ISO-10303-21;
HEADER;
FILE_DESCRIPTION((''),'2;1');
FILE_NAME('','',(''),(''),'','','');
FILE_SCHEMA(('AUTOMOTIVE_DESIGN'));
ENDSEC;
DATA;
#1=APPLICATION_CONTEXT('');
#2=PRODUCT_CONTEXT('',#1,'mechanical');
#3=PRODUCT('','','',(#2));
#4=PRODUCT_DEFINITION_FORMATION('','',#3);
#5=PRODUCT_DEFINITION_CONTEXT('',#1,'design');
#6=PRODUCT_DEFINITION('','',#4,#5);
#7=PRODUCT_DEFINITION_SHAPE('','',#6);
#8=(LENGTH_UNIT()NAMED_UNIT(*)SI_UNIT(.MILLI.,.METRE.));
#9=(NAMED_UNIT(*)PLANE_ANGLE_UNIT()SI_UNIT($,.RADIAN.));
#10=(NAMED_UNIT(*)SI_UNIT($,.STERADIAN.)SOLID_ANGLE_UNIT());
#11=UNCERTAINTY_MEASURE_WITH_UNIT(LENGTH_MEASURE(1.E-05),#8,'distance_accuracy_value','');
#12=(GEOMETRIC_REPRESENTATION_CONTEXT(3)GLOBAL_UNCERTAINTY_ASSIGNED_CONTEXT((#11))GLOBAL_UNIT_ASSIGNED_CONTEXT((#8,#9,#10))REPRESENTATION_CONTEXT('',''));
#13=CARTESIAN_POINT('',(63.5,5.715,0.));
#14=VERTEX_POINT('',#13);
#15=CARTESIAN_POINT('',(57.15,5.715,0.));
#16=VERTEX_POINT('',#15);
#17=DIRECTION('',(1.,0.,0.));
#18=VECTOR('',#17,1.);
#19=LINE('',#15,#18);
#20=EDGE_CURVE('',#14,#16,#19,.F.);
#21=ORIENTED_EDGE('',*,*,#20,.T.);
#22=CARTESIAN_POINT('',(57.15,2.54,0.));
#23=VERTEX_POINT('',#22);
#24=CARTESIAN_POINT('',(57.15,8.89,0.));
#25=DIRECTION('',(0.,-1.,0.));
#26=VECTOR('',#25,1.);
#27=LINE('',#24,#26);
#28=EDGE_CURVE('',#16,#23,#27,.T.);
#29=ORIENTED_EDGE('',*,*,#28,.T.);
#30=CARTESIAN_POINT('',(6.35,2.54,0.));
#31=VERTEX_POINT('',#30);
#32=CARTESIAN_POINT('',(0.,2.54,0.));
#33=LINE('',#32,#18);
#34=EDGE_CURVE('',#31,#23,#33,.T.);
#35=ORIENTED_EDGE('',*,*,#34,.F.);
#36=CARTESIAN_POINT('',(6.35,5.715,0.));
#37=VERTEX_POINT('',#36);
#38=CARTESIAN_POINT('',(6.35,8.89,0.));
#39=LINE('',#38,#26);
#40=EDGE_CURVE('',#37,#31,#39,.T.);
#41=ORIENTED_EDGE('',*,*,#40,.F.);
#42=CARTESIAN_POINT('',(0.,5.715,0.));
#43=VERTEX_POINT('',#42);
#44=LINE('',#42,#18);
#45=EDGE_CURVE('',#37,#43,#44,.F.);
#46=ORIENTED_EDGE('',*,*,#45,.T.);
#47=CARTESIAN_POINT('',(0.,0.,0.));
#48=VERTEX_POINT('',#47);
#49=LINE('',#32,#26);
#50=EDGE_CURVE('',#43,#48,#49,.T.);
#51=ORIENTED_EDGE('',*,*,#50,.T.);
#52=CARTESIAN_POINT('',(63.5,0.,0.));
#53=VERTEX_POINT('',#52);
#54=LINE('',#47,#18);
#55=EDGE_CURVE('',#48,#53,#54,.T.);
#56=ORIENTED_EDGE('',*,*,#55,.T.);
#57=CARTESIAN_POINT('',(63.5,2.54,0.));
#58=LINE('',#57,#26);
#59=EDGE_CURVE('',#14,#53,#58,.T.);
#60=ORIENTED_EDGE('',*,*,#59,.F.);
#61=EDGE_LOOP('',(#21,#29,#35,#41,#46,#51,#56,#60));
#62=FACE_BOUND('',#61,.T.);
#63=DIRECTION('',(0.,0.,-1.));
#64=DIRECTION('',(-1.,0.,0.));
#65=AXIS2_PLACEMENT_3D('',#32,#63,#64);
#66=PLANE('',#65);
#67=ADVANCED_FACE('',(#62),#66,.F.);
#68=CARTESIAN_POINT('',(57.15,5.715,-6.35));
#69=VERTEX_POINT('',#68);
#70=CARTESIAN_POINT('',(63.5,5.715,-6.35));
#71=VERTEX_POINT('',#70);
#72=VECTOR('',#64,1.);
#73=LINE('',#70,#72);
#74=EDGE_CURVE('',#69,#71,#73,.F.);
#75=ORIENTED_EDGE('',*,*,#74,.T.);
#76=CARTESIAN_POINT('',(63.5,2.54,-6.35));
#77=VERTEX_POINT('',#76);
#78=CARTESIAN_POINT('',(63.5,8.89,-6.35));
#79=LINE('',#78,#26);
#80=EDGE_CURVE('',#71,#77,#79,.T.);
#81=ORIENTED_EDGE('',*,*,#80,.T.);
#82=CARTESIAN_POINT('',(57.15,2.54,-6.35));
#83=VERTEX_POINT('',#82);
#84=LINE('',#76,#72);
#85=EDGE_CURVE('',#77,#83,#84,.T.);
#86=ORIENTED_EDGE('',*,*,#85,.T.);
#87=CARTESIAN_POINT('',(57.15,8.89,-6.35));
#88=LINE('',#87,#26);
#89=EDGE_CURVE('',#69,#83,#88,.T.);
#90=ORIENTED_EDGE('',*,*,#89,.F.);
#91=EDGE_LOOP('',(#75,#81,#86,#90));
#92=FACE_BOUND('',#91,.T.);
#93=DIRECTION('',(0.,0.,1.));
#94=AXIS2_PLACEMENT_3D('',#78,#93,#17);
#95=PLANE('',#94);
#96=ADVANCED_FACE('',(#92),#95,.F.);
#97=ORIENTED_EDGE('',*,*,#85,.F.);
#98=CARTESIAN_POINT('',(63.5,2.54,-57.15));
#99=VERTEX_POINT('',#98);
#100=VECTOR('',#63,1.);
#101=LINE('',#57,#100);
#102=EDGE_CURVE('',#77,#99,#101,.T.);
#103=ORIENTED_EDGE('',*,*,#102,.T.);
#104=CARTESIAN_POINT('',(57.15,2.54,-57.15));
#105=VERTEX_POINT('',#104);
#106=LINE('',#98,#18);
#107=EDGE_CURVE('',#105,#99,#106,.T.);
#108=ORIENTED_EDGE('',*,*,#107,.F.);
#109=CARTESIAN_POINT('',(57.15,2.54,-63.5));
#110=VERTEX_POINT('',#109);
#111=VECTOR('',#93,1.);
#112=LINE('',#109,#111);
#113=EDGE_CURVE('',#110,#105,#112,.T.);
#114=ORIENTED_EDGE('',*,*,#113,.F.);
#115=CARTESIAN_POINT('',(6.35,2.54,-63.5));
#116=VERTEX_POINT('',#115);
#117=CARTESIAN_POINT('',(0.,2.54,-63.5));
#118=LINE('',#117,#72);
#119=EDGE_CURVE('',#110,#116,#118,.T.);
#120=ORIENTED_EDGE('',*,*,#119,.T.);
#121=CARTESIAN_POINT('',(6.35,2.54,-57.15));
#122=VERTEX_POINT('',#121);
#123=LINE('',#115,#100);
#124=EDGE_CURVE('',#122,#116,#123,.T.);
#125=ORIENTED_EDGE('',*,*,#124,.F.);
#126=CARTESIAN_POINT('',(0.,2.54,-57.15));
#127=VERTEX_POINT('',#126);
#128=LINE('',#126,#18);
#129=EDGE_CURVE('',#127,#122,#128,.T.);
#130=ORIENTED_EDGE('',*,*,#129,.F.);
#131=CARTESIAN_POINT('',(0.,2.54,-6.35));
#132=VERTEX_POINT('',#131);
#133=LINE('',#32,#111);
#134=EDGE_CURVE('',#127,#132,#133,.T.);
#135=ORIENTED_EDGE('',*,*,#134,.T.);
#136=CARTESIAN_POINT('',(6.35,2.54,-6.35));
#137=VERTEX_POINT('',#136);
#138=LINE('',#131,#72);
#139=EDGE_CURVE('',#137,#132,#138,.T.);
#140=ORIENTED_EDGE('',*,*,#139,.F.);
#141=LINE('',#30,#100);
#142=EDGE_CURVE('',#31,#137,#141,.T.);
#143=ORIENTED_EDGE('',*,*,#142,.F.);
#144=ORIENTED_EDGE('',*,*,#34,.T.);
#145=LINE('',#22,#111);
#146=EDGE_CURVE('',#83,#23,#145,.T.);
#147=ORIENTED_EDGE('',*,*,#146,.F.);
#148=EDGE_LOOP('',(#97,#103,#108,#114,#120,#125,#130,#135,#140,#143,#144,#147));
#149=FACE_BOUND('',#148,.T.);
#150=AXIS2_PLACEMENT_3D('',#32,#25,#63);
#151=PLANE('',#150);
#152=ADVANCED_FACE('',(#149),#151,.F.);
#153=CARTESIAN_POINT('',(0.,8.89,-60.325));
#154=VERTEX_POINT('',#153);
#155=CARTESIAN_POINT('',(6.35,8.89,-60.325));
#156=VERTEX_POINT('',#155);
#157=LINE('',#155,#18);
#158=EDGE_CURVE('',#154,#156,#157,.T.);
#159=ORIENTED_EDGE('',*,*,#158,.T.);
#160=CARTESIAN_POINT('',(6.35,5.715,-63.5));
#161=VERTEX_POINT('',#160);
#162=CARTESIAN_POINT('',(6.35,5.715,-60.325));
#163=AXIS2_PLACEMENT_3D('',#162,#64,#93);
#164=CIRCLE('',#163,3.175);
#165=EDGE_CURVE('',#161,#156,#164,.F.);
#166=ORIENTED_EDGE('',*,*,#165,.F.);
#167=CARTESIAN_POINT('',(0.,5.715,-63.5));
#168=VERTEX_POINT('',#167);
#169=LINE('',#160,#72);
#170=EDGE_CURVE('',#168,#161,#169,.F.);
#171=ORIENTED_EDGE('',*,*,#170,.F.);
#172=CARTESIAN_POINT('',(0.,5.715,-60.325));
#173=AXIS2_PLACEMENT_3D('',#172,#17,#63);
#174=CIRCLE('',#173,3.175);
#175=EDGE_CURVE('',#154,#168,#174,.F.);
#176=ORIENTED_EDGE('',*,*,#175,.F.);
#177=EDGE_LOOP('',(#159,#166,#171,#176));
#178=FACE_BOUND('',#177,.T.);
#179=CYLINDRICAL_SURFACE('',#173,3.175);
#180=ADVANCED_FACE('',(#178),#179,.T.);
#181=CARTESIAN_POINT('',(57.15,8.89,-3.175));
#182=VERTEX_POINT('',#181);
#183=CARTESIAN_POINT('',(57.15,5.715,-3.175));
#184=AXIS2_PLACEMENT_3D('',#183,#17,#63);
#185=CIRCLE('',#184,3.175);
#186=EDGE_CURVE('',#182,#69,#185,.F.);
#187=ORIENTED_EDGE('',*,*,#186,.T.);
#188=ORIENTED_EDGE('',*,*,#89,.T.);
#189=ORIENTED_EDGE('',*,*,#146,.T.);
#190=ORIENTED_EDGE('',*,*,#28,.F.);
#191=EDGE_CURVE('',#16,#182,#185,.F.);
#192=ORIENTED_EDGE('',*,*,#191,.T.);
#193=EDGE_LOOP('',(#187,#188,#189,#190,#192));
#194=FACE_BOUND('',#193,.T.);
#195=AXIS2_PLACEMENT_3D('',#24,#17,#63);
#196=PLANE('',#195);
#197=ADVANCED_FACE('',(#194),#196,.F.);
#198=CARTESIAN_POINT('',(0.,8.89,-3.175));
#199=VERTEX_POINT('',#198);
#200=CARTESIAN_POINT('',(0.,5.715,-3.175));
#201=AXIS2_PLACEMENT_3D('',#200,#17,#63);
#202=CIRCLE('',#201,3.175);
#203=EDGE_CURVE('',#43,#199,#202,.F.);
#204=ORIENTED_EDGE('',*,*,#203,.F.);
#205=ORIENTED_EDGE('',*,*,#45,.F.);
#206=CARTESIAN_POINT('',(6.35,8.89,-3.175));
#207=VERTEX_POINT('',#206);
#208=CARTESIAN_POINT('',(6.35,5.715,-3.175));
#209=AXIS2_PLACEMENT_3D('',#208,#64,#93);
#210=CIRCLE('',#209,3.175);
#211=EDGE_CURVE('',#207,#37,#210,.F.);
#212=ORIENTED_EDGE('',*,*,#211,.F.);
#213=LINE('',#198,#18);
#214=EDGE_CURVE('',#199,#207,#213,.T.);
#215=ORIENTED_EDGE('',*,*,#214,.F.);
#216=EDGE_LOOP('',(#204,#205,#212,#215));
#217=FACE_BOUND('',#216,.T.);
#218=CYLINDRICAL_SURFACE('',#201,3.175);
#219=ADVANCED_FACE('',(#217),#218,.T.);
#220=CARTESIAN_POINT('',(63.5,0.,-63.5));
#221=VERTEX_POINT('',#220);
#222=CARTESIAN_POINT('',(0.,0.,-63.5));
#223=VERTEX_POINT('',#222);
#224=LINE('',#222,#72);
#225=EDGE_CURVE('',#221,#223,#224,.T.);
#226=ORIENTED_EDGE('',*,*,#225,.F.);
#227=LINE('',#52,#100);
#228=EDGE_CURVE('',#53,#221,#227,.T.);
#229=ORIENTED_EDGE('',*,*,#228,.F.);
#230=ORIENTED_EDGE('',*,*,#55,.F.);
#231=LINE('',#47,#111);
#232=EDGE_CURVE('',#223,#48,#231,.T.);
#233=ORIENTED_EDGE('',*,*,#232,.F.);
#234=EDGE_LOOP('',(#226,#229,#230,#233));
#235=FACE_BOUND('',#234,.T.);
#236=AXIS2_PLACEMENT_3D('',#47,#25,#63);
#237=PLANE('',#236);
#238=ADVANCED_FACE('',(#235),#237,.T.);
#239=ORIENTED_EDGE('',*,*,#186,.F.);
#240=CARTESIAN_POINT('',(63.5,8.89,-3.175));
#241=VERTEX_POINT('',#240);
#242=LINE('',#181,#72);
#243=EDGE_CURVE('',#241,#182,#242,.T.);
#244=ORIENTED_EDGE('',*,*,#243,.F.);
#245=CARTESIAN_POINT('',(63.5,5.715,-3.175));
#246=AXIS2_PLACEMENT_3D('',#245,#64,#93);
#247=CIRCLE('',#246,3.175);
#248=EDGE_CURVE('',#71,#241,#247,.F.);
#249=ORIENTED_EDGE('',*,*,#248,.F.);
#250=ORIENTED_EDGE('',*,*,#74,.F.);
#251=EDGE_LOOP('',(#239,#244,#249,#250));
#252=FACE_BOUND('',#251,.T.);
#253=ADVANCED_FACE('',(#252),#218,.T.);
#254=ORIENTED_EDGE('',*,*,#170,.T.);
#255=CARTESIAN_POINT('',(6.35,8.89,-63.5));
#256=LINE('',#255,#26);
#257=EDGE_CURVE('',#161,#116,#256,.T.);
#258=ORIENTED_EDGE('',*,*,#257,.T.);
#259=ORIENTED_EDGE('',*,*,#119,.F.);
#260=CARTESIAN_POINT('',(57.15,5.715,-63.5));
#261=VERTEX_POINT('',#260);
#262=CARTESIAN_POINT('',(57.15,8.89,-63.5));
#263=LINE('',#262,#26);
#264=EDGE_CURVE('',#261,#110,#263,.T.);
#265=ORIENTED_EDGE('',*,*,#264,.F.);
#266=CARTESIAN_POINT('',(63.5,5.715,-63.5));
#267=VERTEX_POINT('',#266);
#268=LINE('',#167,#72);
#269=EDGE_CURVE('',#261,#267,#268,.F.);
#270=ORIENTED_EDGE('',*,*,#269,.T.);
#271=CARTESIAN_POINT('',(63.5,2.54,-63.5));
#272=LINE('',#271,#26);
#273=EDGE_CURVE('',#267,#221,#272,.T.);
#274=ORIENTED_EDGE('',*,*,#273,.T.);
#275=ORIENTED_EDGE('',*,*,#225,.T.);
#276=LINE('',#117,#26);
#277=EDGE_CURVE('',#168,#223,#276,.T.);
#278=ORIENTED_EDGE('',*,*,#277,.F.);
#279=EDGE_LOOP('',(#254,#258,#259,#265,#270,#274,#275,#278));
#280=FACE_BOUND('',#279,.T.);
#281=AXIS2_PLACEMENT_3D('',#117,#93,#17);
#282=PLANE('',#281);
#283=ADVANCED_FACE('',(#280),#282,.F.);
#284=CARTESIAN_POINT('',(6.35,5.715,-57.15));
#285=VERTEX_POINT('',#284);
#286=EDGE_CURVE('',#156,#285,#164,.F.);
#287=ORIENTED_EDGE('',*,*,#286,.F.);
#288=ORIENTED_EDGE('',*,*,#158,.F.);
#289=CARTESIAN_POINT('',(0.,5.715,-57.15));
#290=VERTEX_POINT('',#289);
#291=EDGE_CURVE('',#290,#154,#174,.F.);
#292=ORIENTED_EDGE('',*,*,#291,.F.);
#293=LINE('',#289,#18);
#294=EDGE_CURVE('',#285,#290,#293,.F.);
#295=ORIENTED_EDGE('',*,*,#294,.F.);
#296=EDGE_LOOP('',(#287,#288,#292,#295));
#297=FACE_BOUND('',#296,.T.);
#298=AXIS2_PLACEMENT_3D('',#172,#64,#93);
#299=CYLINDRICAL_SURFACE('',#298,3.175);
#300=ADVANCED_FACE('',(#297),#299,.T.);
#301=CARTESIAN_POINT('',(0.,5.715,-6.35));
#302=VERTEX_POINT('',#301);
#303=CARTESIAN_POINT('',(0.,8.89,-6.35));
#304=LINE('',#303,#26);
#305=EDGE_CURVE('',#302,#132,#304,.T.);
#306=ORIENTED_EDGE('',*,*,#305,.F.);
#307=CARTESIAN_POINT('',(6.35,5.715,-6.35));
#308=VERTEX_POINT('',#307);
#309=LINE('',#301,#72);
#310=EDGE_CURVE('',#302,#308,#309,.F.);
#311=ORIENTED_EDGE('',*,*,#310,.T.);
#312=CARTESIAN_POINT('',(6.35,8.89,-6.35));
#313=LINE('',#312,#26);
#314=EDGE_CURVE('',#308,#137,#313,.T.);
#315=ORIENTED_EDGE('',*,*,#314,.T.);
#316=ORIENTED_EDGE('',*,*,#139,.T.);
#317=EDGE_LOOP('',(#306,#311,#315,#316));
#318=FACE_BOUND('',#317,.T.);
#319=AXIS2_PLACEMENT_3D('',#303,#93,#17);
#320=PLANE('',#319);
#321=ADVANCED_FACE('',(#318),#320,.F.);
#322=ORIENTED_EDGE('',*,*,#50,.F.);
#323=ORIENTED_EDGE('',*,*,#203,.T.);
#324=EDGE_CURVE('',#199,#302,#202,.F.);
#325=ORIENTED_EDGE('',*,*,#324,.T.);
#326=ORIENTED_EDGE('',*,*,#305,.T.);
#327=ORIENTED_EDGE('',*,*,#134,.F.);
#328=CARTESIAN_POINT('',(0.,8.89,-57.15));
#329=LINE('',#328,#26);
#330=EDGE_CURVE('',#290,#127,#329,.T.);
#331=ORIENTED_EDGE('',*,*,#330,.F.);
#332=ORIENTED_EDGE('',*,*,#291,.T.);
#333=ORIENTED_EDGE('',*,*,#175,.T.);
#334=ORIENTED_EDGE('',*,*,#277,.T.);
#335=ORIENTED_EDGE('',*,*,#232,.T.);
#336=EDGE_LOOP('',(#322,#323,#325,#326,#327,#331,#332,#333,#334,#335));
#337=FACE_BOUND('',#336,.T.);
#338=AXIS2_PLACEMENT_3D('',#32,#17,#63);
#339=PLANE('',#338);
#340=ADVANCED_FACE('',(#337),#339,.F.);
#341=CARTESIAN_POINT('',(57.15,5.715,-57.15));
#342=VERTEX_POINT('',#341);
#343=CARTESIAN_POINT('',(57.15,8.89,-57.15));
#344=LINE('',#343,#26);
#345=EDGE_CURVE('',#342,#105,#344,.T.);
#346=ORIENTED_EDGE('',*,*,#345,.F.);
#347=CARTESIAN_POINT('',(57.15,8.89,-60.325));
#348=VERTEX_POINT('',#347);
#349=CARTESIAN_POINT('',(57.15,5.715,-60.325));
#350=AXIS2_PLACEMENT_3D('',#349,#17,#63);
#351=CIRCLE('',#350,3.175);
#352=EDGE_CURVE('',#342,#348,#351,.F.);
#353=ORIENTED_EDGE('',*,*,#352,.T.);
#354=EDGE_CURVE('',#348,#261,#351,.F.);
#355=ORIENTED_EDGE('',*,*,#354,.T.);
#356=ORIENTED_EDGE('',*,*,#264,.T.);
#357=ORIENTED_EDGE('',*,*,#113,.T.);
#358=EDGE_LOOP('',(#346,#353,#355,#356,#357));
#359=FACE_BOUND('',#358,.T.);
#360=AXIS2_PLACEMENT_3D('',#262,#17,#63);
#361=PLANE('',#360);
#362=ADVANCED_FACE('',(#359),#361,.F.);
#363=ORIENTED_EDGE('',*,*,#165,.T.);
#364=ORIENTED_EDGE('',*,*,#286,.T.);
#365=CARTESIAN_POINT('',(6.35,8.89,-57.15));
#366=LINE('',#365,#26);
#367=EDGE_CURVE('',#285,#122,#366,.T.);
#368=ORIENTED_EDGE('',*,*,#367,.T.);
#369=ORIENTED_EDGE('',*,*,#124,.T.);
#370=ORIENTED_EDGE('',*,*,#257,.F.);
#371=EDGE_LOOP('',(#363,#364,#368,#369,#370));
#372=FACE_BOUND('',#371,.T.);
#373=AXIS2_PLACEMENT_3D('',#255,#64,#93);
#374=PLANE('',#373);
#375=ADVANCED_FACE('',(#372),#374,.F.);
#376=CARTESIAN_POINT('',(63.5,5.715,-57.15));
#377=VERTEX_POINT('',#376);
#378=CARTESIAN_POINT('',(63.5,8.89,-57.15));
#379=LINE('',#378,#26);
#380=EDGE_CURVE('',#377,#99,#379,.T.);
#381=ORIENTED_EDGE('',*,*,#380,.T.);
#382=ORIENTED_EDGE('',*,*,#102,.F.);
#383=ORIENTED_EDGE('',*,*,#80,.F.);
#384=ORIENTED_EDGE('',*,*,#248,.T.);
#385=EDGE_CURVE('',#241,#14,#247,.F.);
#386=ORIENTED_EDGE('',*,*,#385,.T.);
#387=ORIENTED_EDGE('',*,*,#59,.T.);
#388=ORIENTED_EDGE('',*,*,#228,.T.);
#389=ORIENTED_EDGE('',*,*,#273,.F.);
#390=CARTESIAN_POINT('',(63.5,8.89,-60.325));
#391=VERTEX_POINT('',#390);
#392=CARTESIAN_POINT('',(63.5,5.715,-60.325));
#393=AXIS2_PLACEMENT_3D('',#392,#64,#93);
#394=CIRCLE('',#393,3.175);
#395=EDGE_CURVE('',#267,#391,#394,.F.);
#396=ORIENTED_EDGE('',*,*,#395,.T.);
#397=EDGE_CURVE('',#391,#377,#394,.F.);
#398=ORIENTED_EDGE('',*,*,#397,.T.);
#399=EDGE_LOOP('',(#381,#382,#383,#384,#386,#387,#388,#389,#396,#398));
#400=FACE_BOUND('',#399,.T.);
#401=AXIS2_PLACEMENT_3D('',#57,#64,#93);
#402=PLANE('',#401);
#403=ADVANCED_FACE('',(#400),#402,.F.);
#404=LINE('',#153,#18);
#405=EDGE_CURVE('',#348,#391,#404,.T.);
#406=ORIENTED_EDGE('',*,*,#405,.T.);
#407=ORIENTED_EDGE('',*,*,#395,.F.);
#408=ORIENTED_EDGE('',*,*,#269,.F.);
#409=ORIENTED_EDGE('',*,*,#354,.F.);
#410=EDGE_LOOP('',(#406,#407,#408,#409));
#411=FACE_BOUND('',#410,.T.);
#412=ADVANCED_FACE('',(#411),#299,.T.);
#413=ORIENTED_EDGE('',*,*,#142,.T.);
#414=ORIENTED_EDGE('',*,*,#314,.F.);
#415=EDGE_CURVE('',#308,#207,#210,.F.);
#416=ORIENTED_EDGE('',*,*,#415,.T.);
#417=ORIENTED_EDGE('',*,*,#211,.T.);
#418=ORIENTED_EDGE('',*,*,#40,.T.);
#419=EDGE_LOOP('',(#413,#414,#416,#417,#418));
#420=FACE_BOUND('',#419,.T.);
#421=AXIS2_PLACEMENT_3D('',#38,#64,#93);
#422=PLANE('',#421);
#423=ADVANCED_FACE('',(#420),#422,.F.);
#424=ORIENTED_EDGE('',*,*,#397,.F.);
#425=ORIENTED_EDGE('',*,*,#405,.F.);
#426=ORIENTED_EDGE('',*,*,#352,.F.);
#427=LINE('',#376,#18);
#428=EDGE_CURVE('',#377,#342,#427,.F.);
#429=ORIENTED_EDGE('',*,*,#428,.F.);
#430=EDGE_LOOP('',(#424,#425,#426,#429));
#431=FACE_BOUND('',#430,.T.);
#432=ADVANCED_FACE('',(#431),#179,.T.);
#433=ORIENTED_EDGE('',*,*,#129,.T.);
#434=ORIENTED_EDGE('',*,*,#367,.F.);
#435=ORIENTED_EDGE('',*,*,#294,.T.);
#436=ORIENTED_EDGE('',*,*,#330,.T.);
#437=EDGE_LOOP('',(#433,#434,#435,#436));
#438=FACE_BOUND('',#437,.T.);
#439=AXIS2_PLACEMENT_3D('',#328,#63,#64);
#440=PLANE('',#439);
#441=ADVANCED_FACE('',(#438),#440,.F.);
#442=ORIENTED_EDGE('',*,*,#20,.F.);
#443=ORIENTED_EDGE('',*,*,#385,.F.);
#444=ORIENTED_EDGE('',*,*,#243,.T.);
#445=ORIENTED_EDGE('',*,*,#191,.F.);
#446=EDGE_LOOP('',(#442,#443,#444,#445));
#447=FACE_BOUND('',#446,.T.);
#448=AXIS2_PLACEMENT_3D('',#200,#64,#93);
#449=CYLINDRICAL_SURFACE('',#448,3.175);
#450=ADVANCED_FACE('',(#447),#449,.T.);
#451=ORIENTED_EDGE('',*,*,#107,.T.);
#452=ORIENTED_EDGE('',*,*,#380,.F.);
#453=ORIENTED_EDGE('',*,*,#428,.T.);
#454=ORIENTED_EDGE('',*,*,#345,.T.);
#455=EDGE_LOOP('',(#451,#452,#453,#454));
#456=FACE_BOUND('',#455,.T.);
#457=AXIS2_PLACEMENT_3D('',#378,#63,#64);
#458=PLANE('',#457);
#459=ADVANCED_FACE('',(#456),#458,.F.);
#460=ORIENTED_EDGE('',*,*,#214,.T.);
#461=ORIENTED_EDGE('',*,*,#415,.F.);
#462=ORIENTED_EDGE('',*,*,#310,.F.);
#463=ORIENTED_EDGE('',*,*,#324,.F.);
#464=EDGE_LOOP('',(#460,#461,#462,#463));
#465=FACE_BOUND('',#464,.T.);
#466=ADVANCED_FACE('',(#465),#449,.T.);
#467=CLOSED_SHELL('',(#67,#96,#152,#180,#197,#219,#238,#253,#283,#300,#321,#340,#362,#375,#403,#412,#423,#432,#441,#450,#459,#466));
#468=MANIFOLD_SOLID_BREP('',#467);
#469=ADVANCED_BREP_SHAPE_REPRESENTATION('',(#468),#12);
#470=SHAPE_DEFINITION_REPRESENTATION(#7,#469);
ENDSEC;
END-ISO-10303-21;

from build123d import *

# Parameters (mm, degrees)
SKETCH1_W           = 63.5
SKETCH1_H           = 63.5
BOSS_EXTRUDE1_DEPTH = 2.54
SKETCH2_W           = 6.35
SKETCH2_H           = 6.35
BOSS_EXTRUDE2_DEPTH = 6.35
FILLET1_R           = 3.175


with BuildPart() as part:
    # Sketch1 → Boss-Extrude1 (new body)
    with BuildSketch(Plane(origin=(0, 0, 0), x_dir=(1, 0, 0), z_dir=(0, 1, 0))):
        with Locations((31.75, 31.75)):
            Rectangle(SKETCH1_W, SKETCH1_H)
    extrude(amount=BOSS_EXTRUDE1_DEPTH)

    # Sketch2 → Boss-Extrude2 (add)
    with BuildSketch(Plane(origin=(0, 2.54, 0), x_dir=(1, 0, 0), z_dir=(0, 1, 0))):
        with Locations((3.175, 3.175)):
            Rectangle(SKETCH2_W, SKETCH2_H)
        with Locations((60.325, 3.175)):
            Rectangle(SKETCH2_W, SKETCH2_H)
        with Locations((3.175, 60.325)):
            Rectangle(SKETCH2_W, SKETCH2_H)
        with Locations((60.325, 60.325)):
            Rectangle(SKETCH2_W, SKETCH2_H)
    extrude(amount=BOSS_EXTRUDE2_DEPTH)

    # Fillet1
    fillet1_edges = [part.edges().sort_by_distance(p)[0] for p in [
        (3.175, 8.89, -6.35),
        (3.175, 8.89, 0),
        (60.325, 8.89, 0),
        (60.325, 8.89, -6.35),
        (60.325, 8.89, -63.5),
        (60.325, 8.89, -57.15),
        (3.175, 8.89, -63.5),
        (3.175, 8.89, -57.15),
    ]]
    fillet(fillet1_edges, radius=FILLET1_R - 0.0001)  # a hair under: the kernel refuses the full size


solid = part.part
